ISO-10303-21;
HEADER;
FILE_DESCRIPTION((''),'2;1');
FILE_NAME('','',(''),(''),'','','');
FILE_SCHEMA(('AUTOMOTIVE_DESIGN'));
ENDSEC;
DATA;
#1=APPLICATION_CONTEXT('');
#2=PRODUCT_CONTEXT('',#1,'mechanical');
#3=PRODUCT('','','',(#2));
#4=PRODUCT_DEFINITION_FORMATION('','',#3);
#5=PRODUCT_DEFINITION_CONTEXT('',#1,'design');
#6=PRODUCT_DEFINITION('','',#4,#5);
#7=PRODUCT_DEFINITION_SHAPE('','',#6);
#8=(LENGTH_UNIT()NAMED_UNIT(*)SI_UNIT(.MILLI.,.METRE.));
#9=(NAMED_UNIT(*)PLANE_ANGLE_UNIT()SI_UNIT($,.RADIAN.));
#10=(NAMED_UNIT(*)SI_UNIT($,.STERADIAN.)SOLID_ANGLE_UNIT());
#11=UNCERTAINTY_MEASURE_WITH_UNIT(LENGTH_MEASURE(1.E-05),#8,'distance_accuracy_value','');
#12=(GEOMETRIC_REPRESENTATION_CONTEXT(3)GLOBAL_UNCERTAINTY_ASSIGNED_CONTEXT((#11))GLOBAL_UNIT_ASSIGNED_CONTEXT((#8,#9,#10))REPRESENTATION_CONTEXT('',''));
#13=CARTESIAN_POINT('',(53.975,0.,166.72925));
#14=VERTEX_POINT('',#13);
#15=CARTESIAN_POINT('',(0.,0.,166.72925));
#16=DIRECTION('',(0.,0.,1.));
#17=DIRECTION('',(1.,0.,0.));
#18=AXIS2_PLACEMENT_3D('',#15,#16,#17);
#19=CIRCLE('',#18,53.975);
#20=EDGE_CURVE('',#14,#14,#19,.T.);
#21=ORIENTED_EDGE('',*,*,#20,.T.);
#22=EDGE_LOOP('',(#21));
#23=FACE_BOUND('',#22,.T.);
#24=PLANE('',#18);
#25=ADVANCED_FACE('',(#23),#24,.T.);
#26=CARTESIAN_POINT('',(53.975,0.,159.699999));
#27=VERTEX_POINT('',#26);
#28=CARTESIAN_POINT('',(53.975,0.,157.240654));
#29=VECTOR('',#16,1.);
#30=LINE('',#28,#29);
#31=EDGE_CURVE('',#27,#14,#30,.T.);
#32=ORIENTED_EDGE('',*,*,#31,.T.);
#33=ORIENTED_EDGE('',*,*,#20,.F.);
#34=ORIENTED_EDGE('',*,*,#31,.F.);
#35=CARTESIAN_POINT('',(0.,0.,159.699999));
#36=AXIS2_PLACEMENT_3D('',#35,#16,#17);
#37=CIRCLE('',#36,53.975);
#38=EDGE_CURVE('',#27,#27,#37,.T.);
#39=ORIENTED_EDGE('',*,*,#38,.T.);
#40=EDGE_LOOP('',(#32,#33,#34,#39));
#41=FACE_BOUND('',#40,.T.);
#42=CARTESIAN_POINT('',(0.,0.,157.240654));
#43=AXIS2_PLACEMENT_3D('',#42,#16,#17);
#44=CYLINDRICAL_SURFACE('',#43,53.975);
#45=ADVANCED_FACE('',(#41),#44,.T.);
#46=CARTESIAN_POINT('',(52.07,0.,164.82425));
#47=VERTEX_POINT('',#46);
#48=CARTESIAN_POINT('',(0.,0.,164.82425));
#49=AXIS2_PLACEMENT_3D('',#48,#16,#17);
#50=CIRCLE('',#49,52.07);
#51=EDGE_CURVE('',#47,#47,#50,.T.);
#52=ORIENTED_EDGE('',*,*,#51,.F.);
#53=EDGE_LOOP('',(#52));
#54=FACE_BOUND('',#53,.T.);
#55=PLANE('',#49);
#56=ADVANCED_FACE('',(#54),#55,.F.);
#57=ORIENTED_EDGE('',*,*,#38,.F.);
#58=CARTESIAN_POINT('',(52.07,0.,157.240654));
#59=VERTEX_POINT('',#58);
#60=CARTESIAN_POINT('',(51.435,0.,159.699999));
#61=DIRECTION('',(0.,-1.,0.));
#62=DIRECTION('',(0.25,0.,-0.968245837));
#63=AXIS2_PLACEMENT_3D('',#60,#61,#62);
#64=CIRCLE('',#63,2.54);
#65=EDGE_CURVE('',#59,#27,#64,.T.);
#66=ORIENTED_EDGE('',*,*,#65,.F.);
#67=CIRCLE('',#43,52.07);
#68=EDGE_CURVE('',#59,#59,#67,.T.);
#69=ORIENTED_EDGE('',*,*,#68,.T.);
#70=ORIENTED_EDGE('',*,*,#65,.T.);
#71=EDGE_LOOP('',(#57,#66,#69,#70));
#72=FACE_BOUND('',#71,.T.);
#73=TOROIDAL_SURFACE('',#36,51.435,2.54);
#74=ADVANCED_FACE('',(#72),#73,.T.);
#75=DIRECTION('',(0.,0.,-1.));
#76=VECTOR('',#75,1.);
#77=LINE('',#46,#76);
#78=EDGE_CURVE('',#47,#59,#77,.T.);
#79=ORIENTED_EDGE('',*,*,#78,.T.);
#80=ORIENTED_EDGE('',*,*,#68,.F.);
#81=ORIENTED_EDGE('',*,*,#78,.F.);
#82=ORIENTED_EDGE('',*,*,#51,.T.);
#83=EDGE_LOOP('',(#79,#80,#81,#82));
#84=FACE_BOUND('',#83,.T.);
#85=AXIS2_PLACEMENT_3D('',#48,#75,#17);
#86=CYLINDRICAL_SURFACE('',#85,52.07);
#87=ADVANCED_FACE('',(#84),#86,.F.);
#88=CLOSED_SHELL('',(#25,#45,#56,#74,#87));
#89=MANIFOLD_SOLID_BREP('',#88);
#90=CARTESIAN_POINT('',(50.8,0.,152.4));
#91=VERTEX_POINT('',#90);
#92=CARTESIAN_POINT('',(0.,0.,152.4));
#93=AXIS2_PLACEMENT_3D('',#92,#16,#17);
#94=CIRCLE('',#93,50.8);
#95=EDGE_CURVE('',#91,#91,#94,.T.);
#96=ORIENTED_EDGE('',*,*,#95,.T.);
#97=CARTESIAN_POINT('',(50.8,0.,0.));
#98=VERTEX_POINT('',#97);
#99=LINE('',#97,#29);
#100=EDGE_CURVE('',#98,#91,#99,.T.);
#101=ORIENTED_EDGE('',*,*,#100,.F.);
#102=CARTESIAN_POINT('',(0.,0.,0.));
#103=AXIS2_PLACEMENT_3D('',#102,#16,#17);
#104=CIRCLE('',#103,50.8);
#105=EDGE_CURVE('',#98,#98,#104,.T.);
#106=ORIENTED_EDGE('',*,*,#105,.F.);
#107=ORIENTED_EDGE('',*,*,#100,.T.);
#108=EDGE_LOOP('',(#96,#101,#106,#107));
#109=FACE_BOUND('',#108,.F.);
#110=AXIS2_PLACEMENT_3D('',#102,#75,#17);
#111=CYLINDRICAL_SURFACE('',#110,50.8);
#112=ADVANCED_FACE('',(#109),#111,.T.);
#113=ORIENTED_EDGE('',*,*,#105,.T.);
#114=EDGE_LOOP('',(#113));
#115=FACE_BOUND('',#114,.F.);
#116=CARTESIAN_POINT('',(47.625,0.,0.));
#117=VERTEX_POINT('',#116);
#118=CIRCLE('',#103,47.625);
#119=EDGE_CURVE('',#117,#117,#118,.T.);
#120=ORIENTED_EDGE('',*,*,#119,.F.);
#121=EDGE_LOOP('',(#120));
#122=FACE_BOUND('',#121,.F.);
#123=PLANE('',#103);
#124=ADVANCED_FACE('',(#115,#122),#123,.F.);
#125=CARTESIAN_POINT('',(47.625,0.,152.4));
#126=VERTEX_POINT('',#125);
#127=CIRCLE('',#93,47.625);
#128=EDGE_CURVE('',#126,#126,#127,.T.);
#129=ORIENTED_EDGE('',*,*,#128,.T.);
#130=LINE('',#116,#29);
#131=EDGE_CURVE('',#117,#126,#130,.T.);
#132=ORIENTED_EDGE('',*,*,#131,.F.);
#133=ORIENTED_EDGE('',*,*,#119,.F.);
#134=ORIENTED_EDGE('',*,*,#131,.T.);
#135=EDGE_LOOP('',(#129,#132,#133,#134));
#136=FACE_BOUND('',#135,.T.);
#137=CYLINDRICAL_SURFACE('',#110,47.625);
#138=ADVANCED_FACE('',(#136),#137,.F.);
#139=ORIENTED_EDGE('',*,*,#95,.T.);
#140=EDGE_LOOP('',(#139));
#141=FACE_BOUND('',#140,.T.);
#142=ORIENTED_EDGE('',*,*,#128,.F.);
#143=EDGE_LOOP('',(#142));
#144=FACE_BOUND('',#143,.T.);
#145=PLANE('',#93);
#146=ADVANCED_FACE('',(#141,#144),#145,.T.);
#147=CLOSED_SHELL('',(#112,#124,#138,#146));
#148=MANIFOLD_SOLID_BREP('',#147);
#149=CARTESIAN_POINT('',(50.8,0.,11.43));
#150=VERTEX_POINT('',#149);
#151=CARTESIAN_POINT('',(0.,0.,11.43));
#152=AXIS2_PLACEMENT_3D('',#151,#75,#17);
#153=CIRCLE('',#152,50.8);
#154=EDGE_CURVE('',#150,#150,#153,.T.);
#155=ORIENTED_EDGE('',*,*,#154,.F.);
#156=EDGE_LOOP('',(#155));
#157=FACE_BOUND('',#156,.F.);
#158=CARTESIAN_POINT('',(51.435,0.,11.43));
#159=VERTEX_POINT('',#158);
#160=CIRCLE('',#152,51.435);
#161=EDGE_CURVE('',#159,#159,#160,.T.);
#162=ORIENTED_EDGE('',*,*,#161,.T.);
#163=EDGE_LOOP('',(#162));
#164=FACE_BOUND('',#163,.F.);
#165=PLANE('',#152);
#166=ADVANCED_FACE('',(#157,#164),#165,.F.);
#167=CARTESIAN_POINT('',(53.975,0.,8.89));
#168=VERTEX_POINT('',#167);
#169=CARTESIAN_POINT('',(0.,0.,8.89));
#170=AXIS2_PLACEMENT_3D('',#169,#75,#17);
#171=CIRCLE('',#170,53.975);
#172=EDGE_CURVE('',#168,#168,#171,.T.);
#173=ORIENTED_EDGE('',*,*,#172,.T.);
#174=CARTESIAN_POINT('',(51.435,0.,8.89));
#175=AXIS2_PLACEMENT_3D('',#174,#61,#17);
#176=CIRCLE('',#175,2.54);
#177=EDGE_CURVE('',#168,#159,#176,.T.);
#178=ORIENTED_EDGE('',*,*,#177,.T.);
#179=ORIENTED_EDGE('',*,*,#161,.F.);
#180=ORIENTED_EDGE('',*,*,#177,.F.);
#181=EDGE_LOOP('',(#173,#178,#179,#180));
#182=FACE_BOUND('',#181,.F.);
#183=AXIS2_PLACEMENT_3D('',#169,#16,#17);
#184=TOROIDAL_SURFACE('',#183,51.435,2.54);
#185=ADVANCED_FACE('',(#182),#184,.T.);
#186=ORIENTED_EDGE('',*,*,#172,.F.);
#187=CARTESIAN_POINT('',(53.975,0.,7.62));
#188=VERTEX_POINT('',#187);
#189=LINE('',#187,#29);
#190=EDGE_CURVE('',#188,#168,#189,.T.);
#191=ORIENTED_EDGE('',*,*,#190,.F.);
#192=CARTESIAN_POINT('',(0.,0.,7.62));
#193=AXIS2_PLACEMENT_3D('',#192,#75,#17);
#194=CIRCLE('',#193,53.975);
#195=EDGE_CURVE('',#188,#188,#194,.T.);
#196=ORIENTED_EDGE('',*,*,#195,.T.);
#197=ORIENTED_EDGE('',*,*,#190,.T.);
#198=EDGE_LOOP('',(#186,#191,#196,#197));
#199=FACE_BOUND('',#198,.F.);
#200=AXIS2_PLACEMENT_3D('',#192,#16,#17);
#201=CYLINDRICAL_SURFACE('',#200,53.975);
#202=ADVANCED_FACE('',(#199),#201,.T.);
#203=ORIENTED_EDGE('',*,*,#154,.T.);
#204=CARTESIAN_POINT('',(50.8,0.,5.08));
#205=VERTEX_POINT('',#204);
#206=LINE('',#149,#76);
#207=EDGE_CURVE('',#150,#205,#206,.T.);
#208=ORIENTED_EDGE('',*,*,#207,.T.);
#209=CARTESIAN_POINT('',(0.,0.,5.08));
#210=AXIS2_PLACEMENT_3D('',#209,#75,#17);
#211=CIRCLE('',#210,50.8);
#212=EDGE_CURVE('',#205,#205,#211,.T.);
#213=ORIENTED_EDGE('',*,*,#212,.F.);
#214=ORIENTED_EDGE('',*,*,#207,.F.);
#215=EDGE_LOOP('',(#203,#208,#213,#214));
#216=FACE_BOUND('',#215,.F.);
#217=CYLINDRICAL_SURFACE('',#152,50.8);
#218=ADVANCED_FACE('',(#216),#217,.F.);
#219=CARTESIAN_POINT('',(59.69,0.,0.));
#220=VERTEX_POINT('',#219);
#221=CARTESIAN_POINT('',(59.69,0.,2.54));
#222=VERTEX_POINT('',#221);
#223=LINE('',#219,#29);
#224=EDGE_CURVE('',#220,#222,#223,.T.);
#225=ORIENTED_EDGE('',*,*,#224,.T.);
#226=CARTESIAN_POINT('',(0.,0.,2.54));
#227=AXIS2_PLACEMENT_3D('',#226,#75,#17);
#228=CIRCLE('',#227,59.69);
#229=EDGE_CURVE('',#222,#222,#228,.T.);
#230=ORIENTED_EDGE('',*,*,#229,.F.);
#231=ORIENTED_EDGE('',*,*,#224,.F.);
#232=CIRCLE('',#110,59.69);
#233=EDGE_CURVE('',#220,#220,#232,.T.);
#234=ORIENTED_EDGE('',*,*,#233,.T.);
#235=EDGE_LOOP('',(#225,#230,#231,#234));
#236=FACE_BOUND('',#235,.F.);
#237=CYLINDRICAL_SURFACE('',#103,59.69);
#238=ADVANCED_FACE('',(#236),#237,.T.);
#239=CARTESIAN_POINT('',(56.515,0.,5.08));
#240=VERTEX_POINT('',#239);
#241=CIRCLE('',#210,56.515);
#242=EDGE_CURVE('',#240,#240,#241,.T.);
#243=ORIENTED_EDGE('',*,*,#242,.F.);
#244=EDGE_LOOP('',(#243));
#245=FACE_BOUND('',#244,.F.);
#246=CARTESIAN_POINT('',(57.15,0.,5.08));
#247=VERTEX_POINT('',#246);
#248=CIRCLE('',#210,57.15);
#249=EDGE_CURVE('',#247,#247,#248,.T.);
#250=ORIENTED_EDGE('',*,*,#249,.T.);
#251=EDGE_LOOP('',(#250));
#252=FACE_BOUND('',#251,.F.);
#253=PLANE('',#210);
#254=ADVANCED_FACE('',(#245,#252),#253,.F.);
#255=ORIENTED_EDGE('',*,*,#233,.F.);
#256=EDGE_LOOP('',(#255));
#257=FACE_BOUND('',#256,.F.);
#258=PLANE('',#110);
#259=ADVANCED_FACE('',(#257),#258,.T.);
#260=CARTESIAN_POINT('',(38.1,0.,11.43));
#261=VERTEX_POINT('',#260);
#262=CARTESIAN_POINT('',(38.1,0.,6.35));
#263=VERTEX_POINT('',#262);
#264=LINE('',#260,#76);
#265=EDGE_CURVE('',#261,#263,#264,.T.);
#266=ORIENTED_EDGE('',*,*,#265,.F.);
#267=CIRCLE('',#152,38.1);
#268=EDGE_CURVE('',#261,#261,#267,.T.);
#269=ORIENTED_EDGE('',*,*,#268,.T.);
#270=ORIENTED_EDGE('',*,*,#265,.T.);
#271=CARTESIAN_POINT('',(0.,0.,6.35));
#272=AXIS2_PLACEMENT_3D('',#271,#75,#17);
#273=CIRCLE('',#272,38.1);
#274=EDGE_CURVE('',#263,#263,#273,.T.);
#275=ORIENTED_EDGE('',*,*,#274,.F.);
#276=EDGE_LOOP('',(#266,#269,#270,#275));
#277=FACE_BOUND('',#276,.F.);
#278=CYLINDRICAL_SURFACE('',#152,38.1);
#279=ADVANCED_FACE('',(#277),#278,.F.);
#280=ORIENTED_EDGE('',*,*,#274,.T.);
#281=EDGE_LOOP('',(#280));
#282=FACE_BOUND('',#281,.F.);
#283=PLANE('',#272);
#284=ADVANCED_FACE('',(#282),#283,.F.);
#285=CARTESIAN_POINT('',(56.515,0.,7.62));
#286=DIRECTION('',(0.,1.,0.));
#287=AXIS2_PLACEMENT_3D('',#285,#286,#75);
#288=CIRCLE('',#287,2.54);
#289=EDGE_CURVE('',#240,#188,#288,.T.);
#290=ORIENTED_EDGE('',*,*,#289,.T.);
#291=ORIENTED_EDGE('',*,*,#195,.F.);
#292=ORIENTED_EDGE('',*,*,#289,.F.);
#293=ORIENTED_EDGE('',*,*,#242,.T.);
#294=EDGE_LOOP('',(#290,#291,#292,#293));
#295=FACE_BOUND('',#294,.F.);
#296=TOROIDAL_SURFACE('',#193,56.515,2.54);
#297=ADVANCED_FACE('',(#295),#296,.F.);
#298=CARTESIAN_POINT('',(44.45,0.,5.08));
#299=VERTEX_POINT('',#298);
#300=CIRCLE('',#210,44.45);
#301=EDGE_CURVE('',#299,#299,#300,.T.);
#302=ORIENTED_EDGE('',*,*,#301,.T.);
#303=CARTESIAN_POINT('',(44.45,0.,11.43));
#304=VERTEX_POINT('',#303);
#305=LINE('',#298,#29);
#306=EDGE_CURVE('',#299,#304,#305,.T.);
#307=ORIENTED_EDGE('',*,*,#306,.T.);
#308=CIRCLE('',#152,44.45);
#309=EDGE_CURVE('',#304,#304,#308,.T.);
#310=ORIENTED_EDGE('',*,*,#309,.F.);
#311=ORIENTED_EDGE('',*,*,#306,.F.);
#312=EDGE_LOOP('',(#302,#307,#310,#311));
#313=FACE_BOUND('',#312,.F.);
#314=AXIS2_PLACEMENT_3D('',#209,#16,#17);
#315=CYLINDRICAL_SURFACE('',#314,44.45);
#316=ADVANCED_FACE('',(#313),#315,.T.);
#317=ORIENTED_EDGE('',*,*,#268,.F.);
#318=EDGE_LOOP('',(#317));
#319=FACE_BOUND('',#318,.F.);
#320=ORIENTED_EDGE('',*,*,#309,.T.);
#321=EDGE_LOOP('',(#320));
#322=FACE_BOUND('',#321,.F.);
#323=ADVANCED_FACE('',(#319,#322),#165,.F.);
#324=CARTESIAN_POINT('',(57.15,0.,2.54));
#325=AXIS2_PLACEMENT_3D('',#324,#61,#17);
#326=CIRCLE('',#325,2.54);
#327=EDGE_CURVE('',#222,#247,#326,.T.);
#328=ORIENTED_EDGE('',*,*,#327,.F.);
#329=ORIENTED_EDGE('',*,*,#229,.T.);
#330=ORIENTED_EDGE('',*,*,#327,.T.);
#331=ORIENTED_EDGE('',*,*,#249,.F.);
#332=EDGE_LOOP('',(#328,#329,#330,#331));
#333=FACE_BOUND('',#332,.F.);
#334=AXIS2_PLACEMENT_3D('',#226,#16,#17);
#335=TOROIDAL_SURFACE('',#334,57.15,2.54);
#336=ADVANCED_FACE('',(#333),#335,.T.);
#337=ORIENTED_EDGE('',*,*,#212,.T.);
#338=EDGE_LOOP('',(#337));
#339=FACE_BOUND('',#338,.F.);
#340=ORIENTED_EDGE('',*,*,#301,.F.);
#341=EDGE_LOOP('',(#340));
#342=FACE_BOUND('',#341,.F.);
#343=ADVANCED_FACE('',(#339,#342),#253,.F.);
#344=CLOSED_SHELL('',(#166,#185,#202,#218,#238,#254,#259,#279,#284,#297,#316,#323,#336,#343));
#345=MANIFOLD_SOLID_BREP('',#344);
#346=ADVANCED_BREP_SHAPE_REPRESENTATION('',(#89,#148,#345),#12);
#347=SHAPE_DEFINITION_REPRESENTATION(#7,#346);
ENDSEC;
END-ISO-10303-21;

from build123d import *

# Parameters (mm, degrees)
F0_R     = 50.8
F0_R_2   = 47.625
F1_DEPTH = 152.4


# Not quite as in the source:
# - a fillet or chamfer that OpenCascade refuses, or shapes differently, is made with other operations: its cross-section is extruded or revolved along the edge and cut away or added


with BuildPart() as f1:
    # F0 (on Top) → F1 (new body)
    with BuildSketch(Plane.XY):
        Circle(F0_R)
        Circle(F0_R_2, mode=Mode.SUBTRACT)
    extrude(amount=F1_DEPTH)


with BuildPart() as f3:
    # F2 (on Front) → F3 (revolve)
    with BuildSketch(Plane.XZ):
        with BuildLine():
            Line((0, 6.35), (0, 0))
            Line((0, 0), (59.69, 0))
            Line((59.69, 0), (59.69, 2.54))
            ThreePointArc((59.69, 2.54), (58.9460512242, 4.3360512242), (57.15, 5.08))
            Line((57.15, 5.08), (56.515, 5.08))
            ThreePointArc((56.515, 5.08), (54.7189487758, 5.8239487758), (53.975, 7.62))
            Line((53.975, 7.62), (53.975, 8.89))
            ThreePointArc((53.975, 8.89), (53.2310512242, 10.6860512242), (51.435, 11.43))
            Line((51.435, 11.43), (50.8, 11.43))
            Line((50.8, 11.43), (50.8, 5.08))
            Line((50.8, 5.08), (44.45, 5.08))
            Line((44.45, 5.08), (44.45, 11.43))
            Line((44.45, 11.43), (38.1, 11.43))
            Line((38.1, 11.43), (38.1, 6.35))
            Line((38.1, 6.35), (0, 6.35))
        make_face()
    revolve(axis=Axis((0, 0, 3.175), (0, 0, -1)))


with BuildPart() as f5:
    # F4 (on Front) → F5 (revolve)
    with BuildSketch(Plane.XZ):
        Polygon((53.975, 166.7292495387), (0, 166.7292495387), (0, 164.8242495387), (52.07, 164.8242495387), (52.07, 157.24065432), (53.975, 157.24065432), align=None)
    revolve(axis=Axis((0, 0, 165.7767495387), (0, 0, 1)))

    # F6: fillet of radius 2.54 on 1 edges, made by hand

    # F6_s1 → F6_t2 (revolve, cut)
    with BuildSketch(Plane.XZ):
        with BuildLine():
            ThreePointArc((52.07, 157.24065432), (53.4430463142, 158.1445727582), (53.975, 159.6999987449))
            Line((53.975, 159.6999987449), (53.975, 157.24065432))
            Line((53.975, 157.24065432), (52.07, 157.24065432))
        make_face()
    revolve(axis=Axis((0, 0, 157.24065432), (0, 0, 1)), mode=Mode.SUBTRACT)


solid = Compound([f1.part, f3.part, f5.part])
